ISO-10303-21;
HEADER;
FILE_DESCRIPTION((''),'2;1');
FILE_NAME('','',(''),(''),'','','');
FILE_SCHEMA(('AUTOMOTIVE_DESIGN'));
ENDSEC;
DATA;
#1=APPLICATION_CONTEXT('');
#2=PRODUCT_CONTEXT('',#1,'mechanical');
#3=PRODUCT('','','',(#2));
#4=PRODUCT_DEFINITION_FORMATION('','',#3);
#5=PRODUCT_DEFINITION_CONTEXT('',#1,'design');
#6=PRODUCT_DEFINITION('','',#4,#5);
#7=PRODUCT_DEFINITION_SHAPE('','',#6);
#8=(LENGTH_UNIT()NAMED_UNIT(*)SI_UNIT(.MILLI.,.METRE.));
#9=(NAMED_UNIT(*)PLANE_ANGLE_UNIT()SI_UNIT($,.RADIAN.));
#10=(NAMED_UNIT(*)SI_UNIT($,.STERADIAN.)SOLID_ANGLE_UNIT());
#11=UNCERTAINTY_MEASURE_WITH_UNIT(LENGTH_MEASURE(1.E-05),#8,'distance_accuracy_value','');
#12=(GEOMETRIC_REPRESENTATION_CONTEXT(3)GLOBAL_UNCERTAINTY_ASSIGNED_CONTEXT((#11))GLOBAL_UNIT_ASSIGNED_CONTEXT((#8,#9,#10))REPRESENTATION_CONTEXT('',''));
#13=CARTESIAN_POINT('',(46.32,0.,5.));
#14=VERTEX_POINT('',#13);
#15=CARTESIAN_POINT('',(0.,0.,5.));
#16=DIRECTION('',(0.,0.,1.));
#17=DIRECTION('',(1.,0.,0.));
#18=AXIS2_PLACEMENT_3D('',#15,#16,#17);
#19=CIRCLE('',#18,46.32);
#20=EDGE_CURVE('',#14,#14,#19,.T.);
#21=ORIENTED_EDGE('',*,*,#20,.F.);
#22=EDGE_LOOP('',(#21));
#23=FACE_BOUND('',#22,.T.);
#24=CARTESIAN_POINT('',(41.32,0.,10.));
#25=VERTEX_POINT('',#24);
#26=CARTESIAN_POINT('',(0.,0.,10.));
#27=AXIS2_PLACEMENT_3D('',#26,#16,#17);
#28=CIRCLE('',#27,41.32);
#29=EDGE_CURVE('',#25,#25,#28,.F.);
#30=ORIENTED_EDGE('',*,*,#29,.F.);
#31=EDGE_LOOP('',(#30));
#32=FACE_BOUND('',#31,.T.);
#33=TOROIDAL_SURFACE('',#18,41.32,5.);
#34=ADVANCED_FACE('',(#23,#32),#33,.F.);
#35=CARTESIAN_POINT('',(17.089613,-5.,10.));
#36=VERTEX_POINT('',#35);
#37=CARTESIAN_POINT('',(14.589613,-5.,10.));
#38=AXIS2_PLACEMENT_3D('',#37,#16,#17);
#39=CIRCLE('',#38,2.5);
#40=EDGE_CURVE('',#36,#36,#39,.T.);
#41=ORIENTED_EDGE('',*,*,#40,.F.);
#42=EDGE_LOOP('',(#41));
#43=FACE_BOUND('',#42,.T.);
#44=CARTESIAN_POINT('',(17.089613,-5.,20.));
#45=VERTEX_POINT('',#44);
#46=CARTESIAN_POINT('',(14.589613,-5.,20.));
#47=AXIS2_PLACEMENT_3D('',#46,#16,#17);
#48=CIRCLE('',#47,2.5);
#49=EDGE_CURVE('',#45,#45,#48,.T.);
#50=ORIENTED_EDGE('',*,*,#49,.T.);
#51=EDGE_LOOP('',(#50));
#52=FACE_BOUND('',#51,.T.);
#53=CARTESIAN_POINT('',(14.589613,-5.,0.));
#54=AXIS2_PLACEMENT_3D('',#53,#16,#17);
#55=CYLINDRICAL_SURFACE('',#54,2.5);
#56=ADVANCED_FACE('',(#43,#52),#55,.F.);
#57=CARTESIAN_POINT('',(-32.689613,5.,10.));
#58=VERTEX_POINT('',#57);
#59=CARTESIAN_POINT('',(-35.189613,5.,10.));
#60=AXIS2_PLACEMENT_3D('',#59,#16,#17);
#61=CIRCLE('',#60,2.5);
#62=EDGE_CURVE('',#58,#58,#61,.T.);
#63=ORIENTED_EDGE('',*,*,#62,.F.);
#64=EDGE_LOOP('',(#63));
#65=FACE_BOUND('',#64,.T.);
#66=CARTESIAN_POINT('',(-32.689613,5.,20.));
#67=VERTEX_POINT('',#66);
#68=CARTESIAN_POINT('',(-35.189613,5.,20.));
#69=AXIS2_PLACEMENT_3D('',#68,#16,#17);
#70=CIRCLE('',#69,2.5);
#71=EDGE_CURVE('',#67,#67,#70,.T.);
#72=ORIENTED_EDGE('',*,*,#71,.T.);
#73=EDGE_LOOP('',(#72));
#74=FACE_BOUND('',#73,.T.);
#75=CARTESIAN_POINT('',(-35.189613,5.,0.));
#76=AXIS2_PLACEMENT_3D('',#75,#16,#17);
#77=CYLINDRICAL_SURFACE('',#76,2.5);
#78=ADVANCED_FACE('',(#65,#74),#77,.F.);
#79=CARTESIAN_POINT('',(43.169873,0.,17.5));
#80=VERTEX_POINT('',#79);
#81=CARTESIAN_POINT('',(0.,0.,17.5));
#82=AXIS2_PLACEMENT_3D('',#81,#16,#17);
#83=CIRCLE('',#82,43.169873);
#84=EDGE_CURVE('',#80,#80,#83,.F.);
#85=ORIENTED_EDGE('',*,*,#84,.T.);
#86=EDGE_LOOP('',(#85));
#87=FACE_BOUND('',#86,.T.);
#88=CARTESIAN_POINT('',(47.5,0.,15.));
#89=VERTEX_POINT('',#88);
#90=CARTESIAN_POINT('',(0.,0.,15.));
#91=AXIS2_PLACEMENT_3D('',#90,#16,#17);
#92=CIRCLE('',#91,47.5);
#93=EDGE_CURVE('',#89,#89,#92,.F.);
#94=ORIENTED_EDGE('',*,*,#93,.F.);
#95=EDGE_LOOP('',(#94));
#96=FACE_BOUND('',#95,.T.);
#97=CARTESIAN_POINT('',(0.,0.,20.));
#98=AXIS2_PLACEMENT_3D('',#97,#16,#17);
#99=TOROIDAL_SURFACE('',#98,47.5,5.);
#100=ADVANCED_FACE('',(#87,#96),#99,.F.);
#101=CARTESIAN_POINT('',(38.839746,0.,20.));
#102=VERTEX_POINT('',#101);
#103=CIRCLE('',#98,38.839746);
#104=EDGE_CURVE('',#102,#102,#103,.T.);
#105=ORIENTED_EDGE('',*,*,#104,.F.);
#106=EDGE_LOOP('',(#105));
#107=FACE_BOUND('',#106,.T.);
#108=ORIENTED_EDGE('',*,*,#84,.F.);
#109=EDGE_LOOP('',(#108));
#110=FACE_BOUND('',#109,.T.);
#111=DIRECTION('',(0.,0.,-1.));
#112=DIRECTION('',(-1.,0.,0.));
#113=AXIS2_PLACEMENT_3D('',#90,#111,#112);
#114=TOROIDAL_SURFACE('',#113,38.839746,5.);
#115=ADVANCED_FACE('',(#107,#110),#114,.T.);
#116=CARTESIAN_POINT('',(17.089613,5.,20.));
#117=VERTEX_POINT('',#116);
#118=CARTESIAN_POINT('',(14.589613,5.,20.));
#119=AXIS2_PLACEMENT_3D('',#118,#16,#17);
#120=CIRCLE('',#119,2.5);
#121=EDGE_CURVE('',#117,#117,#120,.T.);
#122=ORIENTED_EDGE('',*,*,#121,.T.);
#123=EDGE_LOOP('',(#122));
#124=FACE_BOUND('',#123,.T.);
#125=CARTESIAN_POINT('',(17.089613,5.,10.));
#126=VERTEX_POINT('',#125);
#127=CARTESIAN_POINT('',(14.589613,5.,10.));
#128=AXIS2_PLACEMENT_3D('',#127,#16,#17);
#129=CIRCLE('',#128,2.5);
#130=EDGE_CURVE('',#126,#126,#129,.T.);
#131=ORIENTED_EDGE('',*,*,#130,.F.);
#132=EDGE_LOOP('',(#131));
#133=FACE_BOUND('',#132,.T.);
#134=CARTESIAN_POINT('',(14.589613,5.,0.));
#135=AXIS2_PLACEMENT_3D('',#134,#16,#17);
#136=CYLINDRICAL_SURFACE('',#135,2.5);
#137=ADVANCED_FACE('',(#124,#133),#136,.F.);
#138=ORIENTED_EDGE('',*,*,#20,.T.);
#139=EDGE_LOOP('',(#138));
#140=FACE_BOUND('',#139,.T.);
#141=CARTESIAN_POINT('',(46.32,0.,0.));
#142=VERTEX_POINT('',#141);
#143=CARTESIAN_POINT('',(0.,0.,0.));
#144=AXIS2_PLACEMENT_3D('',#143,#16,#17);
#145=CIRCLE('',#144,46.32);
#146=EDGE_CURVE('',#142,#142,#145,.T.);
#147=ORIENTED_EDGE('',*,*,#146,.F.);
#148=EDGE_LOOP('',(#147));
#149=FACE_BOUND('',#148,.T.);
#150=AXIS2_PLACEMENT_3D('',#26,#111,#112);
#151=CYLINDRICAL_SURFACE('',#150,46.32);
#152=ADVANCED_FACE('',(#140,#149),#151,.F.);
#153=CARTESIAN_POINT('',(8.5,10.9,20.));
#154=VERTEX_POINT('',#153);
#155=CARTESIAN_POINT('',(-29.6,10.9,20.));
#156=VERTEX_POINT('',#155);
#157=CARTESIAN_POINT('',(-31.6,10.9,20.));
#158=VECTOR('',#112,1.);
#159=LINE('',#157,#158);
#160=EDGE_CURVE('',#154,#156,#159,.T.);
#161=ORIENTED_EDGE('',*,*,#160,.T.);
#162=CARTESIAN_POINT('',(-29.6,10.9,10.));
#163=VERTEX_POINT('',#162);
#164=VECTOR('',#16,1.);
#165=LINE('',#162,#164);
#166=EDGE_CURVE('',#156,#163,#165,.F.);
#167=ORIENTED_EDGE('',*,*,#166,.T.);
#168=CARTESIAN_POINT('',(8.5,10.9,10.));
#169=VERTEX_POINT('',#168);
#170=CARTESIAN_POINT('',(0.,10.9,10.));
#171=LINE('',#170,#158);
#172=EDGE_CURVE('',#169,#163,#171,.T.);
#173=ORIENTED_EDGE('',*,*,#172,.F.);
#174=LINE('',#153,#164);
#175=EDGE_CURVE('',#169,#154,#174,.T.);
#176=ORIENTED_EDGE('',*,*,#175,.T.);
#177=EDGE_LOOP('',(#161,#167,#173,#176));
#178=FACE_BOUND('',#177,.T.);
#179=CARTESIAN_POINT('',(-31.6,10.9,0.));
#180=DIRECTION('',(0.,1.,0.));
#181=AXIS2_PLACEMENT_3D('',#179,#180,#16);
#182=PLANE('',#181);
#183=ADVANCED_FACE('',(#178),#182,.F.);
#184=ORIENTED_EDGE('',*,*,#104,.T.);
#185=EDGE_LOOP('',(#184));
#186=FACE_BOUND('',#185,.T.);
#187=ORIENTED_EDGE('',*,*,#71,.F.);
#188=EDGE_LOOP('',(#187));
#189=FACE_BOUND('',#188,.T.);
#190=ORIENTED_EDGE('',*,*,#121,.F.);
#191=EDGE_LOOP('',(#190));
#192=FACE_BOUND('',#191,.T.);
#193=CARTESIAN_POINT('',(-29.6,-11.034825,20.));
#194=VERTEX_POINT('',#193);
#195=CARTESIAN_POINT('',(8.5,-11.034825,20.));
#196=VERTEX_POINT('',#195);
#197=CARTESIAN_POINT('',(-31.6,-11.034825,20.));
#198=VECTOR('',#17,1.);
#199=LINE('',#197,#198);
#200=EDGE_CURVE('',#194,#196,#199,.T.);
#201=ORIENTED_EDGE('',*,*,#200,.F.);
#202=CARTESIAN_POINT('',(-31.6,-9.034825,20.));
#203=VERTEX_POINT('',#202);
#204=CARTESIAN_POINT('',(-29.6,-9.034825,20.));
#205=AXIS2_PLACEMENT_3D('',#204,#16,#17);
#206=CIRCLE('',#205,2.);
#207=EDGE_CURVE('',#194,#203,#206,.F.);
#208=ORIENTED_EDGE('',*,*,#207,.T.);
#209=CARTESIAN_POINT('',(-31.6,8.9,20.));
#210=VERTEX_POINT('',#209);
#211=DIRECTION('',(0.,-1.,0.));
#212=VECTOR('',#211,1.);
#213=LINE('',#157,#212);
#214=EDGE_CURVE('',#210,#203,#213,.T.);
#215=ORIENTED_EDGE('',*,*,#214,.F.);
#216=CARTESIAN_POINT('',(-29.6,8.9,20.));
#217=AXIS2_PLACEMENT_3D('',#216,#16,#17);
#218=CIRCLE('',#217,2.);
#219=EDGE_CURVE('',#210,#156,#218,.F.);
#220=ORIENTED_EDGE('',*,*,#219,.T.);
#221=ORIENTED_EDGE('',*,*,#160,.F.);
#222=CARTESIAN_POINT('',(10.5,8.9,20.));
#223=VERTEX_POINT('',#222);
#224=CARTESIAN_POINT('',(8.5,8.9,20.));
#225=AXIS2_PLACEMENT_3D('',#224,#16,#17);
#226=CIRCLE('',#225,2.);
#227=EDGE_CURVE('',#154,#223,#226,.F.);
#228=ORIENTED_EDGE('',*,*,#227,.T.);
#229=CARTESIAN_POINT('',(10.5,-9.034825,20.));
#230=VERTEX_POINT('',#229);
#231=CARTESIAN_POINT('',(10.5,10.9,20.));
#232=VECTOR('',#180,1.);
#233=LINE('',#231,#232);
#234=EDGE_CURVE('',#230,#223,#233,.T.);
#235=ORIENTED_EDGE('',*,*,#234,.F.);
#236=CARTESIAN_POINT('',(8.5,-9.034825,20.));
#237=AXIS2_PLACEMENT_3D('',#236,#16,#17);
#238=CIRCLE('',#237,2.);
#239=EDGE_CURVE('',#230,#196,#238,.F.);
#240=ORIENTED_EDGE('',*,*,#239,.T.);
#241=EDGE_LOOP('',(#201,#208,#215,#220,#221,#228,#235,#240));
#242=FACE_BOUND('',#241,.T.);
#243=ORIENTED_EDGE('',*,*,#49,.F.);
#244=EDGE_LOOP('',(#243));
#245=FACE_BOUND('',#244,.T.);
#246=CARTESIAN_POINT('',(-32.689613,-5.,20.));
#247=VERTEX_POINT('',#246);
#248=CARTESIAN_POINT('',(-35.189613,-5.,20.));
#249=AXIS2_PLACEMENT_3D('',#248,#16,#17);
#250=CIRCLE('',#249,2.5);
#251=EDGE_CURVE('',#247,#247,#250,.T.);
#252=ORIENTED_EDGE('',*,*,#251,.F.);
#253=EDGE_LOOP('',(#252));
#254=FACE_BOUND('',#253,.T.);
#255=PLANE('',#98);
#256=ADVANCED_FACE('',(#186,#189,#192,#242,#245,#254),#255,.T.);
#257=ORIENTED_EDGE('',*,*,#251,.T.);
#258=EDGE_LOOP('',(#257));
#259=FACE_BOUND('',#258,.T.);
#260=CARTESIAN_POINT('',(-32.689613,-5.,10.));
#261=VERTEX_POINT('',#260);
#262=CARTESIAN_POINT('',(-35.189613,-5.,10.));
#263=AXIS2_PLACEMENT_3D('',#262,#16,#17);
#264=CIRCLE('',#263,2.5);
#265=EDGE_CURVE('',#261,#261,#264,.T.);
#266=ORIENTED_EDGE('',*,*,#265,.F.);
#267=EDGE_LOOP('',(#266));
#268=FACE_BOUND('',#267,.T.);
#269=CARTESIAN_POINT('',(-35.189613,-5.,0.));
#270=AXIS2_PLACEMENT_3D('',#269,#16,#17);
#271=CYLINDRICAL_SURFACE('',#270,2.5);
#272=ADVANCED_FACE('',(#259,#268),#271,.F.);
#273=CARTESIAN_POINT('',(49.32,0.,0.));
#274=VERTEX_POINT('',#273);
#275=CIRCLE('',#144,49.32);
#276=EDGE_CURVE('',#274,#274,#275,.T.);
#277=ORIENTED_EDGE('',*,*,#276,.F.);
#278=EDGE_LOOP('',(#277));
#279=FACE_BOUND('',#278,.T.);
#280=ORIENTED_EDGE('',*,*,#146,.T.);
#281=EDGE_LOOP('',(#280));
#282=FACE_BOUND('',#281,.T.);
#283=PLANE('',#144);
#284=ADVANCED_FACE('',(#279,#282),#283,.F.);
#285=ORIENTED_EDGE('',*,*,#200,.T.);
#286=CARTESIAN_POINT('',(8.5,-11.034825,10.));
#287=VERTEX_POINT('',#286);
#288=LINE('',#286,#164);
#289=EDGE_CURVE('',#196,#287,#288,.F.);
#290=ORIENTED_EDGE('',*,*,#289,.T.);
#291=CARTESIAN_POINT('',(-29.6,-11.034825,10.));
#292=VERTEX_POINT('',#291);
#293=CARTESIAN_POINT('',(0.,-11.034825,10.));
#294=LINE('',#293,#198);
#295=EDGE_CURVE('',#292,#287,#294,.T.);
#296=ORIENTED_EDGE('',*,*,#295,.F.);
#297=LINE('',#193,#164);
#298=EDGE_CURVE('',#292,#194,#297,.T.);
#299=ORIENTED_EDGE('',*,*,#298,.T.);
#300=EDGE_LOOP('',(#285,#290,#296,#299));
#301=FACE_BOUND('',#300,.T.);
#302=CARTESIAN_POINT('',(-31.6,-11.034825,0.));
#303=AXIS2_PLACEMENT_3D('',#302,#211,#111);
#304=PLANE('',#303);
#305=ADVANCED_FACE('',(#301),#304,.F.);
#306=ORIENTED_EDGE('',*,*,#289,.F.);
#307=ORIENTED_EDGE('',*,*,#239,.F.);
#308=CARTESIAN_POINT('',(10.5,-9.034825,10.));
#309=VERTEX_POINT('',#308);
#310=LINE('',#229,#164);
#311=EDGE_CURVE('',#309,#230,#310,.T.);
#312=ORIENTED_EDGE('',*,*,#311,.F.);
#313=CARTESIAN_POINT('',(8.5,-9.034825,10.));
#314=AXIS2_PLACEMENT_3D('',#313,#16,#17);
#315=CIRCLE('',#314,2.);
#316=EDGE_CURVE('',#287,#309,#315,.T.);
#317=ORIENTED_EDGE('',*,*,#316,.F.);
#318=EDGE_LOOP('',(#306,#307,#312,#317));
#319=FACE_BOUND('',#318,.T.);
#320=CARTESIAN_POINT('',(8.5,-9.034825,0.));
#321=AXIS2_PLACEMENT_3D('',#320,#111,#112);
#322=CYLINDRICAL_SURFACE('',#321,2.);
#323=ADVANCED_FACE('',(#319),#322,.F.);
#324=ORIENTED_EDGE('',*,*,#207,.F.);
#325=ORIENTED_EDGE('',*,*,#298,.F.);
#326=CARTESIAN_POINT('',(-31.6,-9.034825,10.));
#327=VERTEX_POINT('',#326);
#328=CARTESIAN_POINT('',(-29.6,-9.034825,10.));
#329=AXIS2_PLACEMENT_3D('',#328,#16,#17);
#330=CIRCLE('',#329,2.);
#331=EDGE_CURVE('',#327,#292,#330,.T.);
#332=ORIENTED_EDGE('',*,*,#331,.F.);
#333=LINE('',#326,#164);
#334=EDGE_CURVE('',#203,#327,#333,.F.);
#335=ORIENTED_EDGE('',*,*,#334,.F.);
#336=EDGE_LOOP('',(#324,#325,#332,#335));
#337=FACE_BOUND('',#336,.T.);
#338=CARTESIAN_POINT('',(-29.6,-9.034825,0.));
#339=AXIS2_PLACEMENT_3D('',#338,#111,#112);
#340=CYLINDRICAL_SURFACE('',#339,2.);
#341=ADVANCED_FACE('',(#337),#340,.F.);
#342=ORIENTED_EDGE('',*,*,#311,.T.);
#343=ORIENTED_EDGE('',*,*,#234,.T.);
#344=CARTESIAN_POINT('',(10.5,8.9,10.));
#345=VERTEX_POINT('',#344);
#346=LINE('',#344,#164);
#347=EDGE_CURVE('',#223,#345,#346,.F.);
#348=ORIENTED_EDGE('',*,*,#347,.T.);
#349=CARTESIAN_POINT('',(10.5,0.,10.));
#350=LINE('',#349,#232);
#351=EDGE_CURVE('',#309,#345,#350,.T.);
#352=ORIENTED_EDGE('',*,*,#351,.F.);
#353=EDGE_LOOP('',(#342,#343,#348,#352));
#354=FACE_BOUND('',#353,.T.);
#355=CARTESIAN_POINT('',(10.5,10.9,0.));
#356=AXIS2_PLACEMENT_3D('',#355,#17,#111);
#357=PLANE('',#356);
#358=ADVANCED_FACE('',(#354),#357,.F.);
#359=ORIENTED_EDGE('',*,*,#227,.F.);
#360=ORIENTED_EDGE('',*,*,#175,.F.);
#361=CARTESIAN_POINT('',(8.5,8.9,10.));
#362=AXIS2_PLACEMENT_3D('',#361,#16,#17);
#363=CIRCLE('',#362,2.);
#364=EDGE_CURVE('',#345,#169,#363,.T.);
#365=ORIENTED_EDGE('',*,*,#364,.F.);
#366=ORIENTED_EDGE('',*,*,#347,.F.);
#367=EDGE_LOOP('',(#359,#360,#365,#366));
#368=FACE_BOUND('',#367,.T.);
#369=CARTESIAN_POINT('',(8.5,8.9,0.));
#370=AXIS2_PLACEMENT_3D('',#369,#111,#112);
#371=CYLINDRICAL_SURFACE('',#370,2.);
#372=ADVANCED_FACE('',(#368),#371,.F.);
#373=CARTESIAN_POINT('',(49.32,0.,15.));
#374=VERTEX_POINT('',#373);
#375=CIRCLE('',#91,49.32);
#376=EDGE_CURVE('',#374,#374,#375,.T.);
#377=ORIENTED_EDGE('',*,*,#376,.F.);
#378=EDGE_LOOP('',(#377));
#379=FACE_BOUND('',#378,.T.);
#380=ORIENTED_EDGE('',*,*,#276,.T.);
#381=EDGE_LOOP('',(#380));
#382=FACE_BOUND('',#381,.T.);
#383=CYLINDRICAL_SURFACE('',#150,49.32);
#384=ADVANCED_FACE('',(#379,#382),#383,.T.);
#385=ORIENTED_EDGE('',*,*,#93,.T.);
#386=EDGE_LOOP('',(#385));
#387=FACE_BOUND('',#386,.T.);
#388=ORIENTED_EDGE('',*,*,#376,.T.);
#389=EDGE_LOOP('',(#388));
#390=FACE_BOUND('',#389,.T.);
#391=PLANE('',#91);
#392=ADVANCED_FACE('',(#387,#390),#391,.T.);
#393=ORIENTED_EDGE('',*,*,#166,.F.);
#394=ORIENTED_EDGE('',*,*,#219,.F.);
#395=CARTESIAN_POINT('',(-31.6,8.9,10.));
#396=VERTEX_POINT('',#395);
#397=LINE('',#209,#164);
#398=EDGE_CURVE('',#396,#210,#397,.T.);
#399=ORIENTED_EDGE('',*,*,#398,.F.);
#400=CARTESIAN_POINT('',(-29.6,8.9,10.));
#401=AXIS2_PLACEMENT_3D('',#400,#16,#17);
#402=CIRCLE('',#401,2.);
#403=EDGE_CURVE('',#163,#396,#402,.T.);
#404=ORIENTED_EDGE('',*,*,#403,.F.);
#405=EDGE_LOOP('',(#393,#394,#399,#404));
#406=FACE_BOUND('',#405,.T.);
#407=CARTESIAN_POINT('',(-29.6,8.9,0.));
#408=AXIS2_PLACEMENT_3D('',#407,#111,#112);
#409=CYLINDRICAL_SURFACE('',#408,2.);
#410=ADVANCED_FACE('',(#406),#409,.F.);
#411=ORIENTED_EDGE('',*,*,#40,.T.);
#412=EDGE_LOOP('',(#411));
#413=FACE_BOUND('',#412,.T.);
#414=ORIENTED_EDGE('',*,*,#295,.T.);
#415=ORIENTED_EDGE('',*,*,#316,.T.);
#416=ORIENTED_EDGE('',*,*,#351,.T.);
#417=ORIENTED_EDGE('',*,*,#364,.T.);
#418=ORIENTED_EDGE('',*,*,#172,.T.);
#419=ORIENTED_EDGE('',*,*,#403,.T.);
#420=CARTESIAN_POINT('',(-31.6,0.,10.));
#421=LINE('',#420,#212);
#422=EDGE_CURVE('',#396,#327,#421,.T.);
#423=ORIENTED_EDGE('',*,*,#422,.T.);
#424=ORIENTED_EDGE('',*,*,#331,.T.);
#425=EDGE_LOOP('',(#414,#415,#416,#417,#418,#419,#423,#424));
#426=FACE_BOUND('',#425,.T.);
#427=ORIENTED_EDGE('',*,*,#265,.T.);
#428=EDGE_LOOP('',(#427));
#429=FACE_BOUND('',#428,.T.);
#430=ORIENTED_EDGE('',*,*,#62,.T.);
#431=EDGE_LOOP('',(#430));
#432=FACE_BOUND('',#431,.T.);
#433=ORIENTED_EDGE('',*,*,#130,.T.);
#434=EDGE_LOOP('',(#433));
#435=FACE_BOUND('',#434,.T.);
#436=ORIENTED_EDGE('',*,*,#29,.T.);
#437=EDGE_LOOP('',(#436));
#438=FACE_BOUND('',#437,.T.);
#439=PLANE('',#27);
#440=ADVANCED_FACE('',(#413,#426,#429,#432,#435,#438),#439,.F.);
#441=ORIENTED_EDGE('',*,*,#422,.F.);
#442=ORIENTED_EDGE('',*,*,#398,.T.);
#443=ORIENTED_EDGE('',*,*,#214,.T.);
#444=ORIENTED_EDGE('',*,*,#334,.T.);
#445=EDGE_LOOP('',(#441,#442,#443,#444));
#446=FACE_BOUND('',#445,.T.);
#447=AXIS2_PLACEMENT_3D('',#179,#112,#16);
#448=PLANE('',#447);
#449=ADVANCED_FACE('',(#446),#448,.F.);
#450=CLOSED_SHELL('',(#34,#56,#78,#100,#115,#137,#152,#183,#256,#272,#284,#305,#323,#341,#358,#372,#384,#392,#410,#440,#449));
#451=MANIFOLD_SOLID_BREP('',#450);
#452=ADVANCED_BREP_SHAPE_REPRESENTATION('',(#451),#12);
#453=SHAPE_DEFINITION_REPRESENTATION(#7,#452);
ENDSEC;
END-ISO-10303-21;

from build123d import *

# Parameters (mm, degrees)
SKETCH1_R           = 49.32
SKETCH1_R_2         = 46.32
EXTRUDE_THIN1_DEPTH = 10
SKETCH2_R           = 49.32
BOSS_EXTRUDE1_DEPTH = 5
SKETCH3_R           = 42.5
BOSS_EXTRUDE2_DEPTH = 5
FILLET1_R           = 5
FILLET2_R           = 5
SKETCH4_R           = 2.5
SKETCH4_W           = 42.1
SKETCH4_H           = 21.934824781
CUT_EXTRUDE1_DEPTH  = 73.559801543
FILLET3_R           = 2


with BuildPart() as part:
    # Sketch1 → Extrude-Thin1 (new body)
    with BuildSketch(Plane.XY):
        Circle(SKETCH1_R)
        Circle(SKETCH1_R_2, mode=Mode.SUBTRACT)
    extrude(amount=EXTRUDE_THIN1_DEPTH)

    # Sketch2 → Boss-Extrude1 (add)
    with BuildSketch(Plane.XY.offset(10)):
        Circle(SKETCH2_R)
    extrude(amount=BOSS_EXTRUDE1_DEPTH)

    # Sketch3 → Boss-Extrude2 (add)
    with BuildSketch(Plane.XY.offset(15)):
        Circle(SKETCH3_R)
    extrude(amount=BOSS_EXTRUDE2_DEPTH)

    # Fillet1
    fillet1_edges = [part.edges().sort_by_distance(p)[0] for p in [
        (-42.5, 0, 15),
        (-46.32, 0, 10),
    ]]
    fillet(fillet1_edges, radius=FILLET1_R - 0.0001)  # a hair under: the kernel refuses the full size

    # Fillet2
    fillet2_edges = [part.edges().sort_by_distance(p)[0] for p in [
        (-42.5, 0, 20),
    ]]
    fillet(fillet2_edges, radius=FILLET2_R)

    # Sketch4 → Cut-Extrude1 (cut, through all)
    with BuildSketch(Plane.XY.offset(20)):
        with Locations((-35.189613301, 5)):
            Circle(SKETCH4_R)
        with Locations((-35.189613301, -5)):
            Circle(SKETCH4_R)
        with Locations((14.589613301, 5)):
            Circle(SKETCH4_R)
        with Locations((14.589613301, -5)):
            Circle(SKETCH4_R)
        with Locations((-10.55, -0.067412391)):
            Rectangle(SKETCH4_W, SKETCH4_H)
    extrude(amount=-CUT_EXTRUDE1_DEPTH, mode=Mode.SUBTRACT)

    # Fillet3
    fillet3_edges = [part.edges().sort_by_distance(p)[0] for p in [
        (10.5, 10.9, 15),
        (10.5, -11.034824781, 15),
        (-31.6, -11.034824781, 15),
        (-31.6, 10.9, 15),
    ]]
    fillet(fillet3_edges, radius=FILLET3_R)


solid = part.part
